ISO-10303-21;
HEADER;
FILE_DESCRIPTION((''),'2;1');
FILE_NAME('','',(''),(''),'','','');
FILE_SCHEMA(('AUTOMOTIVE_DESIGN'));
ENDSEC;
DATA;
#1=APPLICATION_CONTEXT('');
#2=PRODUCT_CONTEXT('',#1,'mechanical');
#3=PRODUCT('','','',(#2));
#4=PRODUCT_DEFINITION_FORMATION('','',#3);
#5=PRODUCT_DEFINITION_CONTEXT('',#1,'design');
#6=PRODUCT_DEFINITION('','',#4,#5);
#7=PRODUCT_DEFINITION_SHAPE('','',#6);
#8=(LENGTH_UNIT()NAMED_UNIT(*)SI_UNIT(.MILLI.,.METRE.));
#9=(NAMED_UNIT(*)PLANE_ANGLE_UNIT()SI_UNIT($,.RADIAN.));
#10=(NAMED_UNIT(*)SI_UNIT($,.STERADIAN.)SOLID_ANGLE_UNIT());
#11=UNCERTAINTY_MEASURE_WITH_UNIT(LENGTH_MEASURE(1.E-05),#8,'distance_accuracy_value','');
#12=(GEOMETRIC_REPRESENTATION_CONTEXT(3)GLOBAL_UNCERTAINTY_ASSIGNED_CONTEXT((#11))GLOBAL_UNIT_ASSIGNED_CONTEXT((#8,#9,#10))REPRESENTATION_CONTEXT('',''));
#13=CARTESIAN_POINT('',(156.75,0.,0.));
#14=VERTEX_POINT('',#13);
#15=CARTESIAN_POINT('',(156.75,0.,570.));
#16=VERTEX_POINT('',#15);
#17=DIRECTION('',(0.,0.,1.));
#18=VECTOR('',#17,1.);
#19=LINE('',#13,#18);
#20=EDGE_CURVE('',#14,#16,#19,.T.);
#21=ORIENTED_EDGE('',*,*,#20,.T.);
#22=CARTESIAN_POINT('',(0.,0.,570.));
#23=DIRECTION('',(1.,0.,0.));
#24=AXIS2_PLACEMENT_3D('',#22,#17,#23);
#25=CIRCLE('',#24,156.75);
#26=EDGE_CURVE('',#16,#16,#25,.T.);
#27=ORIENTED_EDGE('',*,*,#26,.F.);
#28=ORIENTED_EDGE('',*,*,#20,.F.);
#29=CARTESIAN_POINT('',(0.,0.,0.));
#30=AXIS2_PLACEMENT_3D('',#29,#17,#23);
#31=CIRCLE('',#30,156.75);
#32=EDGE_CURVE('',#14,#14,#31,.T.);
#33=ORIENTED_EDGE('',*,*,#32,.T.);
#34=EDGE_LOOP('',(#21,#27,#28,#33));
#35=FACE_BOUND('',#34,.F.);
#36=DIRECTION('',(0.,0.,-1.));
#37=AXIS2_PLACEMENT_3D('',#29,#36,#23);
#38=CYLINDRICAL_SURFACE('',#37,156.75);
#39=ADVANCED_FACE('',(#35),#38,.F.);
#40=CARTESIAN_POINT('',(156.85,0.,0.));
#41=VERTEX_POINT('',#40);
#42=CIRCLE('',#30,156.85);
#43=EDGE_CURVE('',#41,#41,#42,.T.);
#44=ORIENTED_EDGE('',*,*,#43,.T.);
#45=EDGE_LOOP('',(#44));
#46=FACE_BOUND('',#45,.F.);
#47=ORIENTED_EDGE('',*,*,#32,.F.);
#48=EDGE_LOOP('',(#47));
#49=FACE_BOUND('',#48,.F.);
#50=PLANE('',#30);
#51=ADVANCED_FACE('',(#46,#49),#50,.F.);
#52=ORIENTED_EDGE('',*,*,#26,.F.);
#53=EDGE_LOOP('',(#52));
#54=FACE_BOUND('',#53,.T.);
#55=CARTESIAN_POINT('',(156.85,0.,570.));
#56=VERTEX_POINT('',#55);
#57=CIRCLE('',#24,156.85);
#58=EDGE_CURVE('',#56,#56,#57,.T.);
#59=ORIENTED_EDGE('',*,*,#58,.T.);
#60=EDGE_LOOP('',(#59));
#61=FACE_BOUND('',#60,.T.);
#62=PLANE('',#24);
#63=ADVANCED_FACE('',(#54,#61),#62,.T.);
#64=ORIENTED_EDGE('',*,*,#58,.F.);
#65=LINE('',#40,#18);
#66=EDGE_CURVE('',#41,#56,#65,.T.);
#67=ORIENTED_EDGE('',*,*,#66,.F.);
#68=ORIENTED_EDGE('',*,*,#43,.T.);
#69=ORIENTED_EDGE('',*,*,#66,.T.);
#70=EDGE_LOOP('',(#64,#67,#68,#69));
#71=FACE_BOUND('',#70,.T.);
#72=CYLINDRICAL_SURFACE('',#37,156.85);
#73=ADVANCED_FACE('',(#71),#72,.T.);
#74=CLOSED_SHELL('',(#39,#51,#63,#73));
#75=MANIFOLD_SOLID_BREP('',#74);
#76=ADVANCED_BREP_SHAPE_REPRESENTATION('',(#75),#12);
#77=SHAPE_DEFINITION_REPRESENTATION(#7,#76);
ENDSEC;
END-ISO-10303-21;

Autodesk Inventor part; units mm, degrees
ref_plane "YZ Plane" through (0, 0, 0) normal (1, 0, 0) x (0, 1, 0)
ref_plane "XZ Plane" through (0, 0, 0) normal (0, 1, 0) x (-1, 0, 0)
ref_plane "XY Plane" through (0, 0, 0) normal (0, 0, 1) x (1, 0, 0)
sketch "スケッチ1" plane through (0, 0, 0) normal (0, 0, 1) x (1, 0, 0)
  circle A0 centre (0, 0) radius 156.75
  circle A1 centre (0, 0) radius 156.85
  dimension "d0" = 313.5
  dimension "d1" = 0.1
extrude "押し出し1" add sketch "スケッチ1" along normal blind 570
equation "\"d0\" = 0.55 * H_top"
equation "\"d2\" = H_top"
equation "\"H_head\" = 28.5"
equation "\"H_leg\" = 199.5"
equation "\"H_top\" = 570"
equation "\"足の面積\" = 12720.125"
equation "\"現在の面積\" = 11560"
equation "\"足_短辺\" = 68"
equation "\"円柱\" = 313.5"
equation "\"胴体中心から手先\" = 342"
equation "\"H_leg_1\" = 186.2"
equation "\"H_leg_MAX\" = 399"
equation "\"H_head_1\" = 26.6"
equation "\"H_head_MAX\" = 142.5"
properties part number "円柱"
